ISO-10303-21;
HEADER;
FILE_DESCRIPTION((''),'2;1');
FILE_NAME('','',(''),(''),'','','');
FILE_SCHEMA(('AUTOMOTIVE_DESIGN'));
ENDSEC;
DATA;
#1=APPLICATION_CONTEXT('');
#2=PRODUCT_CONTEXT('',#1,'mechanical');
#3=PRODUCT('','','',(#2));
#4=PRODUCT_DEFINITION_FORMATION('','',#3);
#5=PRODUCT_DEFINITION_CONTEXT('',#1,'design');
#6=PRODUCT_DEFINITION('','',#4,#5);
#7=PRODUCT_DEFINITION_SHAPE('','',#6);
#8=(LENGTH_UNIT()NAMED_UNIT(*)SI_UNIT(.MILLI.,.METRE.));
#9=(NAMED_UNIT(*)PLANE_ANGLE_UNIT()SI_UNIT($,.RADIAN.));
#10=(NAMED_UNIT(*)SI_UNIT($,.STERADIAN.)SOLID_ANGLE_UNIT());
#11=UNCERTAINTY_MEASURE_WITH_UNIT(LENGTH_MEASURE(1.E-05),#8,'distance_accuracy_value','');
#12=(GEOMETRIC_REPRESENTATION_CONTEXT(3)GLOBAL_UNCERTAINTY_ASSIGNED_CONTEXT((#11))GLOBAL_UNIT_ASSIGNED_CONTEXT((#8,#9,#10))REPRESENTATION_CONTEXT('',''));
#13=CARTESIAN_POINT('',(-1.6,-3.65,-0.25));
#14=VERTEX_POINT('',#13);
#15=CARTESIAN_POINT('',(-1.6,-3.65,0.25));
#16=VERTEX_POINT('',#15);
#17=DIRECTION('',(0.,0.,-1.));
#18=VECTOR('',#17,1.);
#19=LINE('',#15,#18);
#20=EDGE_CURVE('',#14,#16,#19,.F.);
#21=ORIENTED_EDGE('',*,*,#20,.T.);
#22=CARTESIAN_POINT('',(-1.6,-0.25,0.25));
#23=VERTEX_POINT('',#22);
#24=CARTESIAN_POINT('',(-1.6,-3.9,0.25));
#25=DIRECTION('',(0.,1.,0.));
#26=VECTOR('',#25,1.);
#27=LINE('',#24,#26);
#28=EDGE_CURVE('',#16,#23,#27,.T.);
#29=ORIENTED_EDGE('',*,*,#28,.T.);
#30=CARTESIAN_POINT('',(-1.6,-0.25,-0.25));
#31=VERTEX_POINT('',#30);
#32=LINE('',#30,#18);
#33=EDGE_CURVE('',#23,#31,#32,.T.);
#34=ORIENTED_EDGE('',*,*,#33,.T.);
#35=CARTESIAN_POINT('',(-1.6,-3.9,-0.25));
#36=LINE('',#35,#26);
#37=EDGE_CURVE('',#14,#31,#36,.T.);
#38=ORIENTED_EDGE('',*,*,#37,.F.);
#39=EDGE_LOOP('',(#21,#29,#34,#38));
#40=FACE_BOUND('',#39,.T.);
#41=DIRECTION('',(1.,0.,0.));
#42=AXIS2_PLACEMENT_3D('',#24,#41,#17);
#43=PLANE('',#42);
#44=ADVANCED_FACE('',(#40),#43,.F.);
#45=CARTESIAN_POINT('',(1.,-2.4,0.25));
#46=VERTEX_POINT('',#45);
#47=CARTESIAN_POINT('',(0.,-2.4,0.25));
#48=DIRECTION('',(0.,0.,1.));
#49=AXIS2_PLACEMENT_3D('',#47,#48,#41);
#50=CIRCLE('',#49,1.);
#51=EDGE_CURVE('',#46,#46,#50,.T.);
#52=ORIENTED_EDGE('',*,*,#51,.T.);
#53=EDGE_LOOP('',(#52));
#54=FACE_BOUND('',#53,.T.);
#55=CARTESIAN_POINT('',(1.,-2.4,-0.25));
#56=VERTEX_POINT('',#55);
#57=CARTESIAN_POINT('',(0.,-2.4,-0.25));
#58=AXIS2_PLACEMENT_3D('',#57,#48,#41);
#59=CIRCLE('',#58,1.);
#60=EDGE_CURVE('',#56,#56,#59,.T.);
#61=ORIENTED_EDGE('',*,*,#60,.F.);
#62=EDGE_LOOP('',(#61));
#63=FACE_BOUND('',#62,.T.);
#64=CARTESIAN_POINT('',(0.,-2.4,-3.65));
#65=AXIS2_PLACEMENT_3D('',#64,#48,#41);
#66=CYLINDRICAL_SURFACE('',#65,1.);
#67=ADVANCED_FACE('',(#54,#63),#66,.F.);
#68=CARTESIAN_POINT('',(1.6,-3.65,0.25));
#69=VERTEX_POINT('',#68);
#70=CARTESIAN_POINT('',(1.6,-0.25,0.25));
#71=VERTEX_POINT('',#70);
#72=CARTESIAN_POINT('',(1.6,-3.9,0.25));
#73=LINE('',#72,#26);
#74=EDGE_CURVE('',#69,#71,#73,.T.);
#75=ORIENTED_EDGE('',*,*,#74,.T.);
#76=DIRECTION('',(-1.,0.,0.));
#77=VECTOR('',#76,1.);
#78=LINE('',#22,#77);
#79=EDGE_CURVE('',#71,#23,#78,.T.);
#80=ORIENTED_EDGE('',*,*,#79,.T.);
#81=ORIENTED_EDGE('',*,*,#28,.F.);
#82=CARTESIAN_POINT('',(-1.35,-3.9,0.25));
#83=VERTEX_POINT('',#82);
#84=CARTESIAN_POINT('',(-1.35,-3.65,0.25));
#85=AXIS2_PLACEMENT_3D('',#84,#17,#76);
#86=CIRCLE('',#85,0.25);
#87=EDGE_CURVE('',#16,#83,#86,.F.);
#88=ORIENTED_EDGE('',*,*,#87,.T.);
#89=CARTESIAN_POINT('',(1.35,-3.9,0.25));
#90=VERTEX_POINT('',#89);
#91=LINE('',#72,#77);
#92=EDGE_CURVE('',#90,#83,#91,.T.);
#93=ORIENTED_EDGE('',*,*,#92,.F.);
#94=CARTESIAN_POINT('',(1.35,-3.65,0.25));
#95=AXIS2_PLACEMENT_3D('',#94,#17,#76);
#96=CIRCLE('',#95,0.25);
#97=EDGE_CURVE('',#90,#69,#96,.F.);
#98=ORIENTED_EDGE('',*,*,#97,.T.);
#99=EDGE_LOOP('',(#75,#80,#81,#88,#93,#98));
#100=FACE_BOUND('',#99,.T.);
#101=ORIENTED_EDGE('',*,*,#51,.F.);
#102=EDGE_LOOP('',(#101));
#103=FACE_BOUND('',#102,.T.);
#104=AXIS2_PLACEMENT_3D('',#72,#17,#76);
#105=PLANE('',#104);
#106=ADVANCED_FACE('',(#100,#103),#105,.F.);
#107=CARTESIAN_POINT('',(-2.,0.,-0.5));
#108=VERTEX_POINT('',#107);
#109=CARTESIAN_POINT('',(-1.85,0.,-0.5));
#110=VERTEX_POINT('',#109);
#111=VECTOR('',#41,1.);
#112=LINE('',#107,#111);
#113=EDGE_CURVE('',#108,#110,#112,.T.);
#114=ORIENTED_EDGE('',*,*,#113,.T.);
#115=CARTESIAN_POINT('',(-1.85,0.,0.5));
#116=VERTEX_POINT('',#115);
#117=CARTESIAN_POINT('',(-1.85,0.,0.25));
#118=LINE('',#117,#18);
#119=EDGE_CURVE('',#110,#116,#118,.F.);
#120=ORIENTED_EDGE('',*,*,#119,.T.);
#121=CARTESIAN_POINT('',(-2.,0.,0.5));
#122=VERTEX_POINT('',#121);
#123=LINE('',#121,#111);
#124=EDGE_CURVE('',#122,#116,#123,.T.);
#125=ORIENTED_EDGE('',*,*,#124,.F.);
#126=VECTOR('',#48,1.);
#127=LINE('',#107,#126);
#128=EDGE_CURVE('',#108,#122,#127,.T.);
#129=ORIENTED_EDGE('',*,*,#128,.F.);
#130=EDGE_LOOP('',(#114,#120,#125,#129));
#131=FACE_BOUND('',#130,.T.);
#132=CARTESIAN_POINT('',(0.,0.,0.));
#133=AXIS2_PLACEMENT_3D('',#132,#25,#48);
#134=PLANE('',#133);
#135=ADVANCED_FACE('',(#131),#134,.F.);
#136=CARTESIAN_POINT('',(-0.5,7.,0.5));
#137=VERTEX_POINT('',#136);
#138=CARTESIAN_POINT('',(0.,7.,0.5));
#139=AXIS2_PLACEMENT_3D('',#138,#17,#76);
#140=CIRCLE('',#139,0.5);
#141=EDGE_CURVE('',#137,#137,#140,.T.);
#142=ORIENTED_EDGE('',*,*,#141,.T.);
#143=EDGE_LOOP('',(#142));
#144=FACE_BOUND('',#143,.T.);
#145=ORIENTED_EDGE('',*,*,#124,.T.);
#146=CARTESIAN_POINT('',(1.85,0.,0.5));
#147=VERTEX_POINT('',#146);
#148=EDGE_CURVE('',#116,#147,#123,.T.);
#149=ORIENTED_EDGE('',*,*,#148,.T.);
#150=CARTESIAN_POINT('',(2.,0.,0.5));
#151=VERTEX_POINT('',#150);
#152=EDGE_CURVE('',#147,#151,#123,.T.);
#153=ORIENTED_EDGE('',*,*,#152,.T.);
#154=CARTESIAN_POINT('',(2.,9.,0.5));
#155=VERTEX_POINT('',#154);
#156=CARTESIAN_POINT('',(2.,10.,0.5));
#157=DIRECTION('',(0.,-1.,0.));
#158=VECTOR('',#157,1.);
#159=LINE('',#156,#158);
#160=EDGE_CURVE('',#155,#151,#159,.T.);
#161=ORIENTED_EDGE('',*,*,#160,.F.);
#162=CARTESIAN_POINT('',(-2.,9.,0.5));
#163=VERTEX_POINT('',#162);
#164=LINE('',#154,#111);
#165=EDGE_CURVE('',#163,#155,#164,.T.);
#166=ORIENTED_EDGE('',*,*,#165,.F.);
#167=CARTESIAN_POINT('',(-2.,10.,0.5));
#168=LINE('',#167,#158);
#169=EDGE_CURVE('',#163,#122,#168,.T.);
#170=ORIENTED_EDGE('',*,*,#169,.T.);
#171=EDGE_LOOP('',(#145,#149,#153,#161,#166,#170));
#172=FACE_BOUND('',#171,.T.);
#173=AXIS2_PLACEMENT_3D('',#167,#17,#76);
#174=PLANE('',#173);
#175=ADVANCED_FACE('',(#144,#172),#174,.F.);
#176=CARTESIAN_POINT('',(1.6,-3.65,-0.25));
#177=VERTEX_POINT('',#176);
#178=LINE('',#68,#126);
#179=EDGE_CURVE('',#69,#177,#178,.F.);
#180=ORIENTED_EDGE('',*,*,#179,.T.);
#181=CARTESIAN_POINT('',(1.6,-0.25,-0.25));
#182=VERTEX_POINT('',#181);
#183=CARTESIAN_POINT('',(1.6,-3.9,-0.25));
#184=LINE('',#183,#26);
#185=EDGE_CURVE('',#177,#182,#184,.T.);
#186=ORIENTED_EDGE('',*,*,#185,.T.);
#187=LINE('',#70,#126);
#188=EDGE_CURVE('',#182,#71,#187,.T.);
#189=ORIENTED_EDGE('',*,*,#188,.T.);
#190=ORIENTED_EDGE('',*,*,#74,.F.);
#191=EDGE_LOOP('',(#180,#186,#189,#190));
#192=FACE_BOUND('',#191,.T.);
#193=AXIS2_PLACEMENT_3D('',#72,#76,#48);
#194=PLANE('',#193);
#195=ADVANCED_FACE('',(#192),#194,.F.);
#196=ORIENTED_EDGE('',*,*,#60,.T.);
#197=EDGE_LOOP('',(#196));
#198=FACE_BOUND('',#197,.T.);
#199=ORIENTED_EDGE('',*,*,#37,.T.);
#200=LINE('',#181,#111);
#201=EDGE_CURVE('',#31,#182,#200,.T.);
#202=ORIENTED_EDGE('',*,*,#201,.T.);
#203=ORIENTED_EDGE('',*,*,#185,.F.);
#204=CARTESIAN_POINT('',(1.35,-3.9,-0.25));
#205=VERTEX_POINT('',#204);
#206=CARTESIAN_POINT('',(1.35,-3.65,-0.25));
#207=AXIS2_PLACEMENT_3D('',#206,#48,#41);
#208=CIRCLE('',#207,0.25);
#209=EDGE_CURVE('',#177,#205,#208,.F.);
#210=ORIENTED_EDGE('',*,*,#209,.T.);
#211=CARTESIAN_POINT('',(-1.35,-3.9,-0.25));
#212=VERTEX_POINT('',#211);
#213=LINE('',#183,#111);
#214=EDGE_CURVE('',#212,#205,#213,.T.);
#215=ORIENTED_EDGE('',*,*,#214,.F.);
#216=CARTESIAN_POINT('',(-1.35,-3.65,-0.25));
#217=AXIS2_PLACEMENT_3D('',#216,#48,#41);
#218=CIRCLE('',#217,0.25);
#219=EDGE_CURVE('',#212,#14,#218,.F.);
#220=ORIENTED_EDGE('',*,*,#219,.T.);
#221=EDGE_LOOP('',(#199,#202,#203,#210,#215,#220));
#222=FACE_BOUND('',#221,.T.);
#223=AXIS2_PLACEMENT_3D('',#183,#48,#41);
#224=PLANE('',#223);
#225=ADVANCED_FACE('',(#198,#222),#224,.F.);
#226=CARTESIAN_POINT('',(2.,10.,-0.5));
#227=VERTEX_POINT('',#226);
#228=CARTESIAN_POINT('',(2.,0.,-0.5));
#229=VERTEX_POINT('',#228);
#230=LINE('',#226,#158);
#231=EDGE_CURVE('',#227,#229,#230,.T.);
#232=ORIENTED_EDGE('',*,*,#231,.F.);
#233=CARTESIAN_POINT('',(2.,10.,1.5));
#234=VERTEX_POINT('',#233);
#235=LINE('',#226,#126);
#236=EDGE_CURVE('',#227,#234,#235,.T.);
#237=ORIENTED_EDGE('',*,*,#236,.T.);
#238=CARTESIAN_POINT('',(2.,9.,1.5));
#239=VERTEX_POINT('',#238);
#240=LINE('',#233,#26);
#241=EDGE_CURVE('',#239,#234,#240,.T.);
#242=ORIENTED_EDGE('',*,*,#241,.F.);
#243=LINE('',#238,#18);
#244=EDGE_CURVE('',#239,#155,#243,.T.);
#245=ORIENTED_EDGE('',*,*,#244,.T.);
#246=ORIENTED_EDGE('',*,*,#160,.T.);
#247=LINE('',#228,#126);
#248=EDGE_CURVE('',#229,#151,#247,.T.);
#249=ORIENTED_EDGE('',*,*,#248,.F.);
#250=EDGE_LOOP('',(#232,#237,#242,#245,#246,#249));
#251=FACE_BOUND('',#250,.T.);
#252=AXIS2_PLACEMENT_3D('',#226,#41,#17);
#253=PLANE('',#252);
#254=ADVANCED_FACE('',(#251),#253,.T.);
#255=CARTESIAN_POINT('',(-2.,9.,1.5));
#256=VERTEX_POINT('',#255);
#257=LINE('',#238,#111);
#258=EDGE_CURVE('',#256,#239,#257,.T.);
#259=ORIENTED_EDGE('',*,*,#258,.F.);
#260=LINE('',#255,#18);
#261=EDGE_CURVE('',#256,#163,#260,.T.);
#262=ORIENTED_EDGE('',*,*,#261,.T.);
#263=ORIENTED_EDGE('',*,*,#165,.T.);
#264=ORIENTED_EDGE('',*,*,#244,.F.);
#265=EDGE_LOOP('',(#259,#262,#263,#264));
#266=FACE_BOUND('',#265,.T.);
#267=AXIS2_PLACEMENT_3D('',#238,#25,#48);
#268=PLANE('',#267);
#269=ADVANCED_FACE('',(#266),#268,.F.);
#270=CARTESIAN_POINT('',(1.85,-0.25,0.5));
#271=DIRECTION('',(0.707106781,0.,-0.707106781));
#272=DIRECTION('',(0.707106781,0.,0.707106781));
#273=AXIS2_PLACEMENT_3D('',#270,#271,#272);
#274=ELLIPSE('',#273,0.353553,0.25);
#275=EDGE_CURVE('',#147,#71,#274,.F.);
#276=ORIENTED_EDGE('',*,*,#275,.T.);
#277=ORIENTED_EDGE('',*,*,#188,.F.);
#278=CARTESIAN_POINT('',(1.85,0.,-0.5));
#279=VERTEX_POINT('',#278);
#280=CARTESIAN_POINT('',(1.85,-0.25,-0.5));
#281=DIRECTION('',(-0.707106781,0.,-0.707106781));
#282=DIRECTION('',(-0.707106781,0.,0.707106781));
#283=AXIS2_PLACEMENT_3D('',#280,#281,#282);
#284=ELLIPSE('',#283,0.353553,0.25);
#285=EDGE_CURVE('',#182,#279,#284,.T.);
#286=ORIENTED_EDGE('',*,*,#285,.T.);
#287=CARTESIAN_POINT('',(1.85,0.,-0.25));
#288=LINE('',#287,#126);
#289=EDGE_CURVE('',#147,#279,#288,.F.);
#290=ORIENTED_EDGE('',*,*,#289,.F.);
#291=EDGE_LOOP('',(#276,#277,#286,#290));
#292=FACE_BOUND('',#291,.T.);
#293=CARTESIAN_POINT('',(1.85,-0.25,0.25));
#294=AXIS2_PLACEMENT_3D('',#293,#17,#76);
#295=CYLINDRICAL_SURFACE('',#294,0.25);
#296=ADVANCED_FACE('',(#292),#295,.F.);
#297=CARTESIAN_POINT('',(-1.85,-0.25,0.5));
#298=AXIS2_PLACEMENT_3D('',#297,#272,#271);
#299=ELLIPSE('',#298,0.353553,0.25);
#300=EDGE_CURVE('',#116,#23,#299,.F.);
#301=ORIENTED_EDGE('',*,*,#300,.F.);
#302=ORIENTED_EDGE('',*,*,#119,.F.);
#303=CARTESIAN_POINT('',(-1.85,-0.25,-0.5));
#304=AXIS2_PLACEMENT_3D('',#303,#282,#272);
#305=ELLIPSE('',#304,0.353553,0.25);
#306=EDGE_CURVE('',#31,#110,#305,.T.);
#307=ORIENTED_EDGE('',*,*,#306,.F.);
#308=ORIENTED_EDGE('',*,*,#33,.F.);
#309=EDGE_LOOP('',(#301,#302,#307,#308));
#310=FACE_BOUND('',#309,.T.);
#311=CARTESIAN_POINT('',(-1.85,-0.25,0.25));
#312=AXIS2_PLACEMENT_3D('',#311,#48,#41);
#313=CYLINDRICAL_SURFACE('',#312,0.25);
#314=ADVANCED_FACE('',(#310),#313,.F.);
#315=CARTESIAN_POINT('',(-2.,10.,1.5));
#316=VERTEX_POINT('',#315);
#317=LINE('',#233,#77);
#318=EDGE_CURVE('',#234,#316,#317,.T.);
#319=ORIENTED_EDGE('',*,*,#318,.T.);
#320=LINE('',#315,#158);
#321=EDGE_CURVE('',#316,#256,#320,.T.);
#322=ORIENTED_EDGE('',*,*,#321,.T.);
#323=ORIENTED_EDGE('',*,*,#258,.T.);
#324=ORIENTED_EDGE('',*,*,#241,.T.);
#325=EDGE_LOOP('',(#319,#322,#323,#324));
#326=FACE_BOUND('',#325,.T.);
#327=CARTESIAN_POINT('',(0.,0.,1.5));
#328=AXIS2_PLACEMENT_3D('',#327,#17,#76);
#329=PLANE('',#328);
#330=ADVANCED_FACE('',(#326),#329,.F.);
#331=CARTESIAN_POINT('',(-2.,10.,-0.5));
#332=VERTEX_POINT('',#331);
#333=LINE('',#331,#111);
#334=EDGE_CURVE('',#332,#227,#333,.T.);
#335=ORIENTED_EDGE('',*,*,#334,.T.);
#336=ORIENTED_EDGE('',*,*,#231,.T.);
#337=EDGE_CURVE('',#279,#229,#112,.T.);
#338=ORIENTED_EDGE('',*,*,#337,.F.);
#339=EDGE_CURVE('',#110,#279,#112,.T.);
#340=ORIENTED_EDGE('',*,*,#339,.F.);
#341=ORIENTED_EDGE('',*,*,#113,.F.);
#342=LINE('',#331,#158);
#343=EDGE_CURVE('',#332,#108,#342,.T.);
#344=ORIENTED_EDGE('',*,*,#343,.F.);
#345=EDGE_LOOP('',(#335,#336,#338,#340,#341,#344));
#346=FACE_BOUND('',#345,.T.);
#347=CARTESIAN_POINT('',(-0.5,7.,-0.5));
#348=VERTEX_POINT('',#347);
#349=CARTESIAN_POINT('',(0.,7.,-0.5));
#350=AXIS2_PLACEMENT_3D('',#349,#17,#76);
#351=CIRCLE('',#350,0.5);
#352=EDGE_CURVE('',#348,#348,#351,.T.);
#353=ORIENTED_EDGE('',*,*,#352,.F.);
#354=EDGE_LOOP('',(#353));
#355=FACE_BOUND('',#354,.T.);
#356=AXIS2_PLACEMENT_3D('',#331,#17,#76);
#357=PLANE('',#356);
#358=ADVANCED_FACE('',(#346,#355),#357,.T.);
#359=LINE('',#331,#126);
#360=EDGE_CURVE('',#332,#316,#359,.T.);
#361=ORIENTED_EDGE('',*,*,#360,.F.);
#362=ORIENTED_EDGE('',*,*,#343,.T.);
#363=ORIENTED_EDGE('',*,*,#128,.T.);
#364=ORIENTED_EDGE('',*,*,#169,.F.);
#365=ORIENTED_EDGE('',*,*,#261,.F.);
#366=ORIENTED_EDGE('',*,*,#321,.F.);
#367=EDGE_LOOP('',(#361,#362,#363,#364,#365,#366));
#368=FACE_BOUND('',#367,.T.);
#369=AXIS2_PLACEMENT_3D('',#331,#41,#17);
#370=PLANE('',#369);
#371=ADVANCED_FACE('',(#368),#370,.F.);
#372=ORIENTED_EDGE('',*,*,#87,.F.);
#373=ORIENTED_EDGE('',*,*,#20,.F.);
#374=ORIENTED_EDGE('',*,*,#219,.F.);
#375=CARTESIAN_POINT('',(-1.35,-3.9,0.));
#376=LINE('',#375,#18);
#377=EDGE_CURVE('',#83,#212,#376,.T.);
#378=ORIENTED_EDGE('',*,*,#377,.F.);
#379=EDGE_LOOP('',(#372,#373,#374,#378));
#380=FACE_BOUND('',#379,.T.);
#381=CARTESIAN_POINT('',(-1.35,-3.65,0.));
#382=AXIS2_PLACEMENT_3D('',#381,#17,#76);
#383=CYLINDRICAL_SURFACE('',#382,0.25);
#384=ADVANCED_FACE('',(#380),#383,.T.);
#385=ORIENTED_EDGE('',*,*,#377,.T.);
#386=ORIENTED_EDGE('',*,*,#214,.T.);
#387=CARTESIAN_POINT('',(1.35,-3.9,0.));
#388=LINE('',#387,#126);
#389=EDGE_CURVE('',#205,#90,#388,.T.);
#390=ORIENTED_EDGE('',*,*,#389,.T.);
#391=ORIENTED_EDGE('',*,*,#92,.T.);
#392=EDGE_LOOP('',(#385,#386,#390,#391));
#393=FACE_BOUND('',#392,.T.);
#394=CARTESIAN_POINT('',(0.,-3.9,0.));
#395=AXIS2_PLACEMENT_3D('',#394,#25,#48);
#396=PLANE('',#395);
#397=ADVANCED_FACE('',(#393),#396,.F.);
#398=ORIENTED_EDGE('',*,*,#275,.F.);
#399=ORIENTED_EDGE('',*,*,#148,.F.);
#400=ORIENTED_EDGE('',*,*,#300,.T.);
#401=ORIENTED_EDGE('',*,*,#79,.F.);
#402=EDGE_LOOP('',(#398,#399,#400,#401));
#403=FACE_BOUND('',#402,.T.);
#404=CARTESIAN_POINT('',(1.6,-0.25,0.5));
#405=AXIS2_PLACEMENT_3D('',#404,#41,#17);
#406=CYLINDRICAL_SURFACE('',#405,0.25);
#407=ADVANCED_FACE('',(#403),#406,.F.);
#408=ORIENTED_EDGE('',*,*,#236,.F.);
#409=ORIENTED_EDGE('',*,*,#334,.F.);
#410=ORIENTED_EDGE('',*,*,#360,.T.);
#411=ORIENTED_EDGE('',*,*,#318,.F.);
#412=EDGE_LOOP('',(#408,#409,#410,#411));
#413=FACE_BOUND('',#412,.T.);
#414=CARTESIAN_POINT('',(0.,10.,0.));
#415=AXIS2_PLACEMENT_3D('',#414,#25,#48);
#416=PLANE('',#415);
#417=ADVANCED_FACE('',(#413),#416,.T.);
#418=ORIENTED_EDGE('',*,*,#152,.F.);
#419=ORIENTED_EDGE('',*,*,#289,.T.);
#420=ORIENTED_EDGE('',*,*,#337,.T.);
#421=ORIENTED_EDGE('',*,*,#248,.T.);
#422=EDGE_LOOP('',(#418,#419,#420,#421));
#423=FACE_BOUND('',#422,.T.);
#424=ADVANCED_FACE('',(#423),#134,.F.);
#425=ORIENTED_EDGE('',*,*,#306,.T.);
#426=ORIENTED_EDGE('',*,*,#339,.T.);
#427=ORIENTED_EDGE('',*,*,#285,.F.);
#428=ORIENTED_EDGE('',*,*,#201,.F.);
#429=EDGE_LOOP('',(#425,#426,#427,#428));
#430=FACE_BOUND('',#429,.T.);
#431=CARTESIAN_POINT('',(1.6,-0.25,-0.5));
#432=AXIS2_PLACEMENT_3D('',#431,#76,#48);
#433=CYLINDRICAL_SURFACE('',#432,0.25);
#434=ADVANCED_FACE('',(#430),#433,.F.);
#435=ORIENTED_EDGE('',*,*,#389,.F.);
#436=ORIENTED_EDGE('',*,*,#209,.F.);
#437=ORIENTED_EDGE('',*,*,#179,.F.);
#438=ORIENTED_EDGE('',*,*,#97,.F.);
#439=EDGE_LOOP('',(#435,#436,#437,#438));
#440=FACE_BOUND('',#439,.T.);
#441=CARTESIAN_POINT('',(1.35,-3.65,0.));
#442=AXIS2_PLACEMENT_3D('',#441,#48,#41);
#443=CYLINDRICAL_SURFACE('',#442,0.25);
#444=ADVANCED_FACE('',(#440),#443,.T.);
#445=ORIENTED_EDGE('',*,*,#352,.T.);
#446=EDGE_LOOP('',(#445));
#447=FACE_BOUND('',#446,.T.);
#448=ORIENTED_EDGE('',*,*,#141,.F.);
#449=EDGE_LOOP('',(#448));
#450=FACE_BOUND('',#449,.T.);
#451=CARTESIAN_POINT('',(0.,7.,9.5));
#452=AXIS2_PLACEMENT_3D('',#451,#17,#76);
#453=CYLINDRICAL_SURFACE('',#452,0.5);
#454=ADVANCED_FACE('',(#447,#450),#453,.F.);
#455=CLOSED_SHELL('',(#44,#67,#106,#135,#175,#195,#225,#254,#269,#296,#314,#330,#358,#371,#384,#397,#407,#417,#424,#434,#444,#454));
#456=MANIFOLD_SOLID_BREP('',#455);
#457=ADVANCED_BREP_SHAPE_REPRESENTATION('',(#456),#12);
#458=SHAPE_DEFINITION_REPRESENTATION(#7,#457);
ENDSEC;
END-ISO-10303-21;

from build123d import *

# Parameters (mm, degrees)
SZKIC1_W                    = 4
SZKIC1_H                    = 1
DODANIE_WYCI_GNI_CIE1_DEPTH = 10
SZKIC2_R                    = 0.5
WYTNIJ_WYCI_GNI_CIE1_DEPTH  = 10
SZKIC3_W                    = 4
SZKIC3_H                    = 1
DODANIE_WYCI_GNI_CIE2_DEPTH = 1
SZKIC4_W                    = 3.2
SZKIC4_H                    = 0.5
DODANIE_WYCI_GNI_CIE3_DEPTH = 3.9
SZKIC5_R                    = 1
WYTNIJ_WYCI_GNI_CIE2_DEPTH  = 3.9
ZAOKR_GLENIE1_R             = 0.25


with BuildPart() as part:
    # Szkic1 → Dodanie-wyciągnięcie1 (new body)
    with BuildSketch(Plane(origin=(0, 0, 0), x_dir=(1, 0, 0), z_dir=(0, 1, 0))):
        Rectangle(SZKIC1_W, SZKIC1_H)
    extrude(amount=DODANIE_WYCI_GNI_CIE1_DEPTH)

    # Szkic2 → Wytnij-wyciągnięcie1 (cut)
    with BuildSketch(Plane(origin=(0, 0, -0.5), x_dir=(-1, 0, 0), z_dir=(0, 0, -1))):
        with Locations((0, 7)):
            Circle(SZKIC2_R)
    extrude(amount=-WYTNIJ_WYCI_GNI_CIE1_DEPTH, mode=Mode.SUBTRACT)

    # Szkic3 → Dodanie-wyciągnięcie2 (add)
    with BuildSketch(Plane.XY.offset(0.5)):
        with Locations((0, 9.5)):
            Rectangle(SZKIC3_W, SZKIC3_H)
    extrude(amount=DODANIE_WYCI_GNI_CIE2_DEPTH)

    # Szkic4 → Dodanie-wyciągnięcie3 (add)
    with BuildSketch(Plane(origin=(0, 0, 0), x_dir=(-1, 0, 0), z_dir=(0, -1, 0))):
        Rectangle(SZKIC4_W, SZKIC4_H)
    extrude(amount=DODANIE_WYCI_GNI_CIE3_DEPTH)

    # Szkic5 → Wytnij-wyciągnięcie2 (cut)
    with BuildSketch(Plane.XY.offset(0.25)):
        with Locations((0, -2.4)):
            Circle(SZKIC5_R)
    extrude(amount=-WYTNIJ_WYCI_GNI_CIE2_DEPTH, mode=Mode.SUBTRACT)

    # Zaokrąglenie1
    zaokr_glenie1_edges = [part.edges().sort_by_distance(p)[0] for p in [
        (-1.6, 0, 0),
        (0, 0, -0.25),
        (1.6, 0, 0),
        (0, 0, 0.25),
        (-1.6, -3.9, 0),
        (1.6, -3.9, 0),
    ]]
    fillet(zaokr_glenie1_edges, radius=ZAOKR_GLENIE1_R - 0.0001)  # a hair under: the kernel refuses the full size


solid = part.part
